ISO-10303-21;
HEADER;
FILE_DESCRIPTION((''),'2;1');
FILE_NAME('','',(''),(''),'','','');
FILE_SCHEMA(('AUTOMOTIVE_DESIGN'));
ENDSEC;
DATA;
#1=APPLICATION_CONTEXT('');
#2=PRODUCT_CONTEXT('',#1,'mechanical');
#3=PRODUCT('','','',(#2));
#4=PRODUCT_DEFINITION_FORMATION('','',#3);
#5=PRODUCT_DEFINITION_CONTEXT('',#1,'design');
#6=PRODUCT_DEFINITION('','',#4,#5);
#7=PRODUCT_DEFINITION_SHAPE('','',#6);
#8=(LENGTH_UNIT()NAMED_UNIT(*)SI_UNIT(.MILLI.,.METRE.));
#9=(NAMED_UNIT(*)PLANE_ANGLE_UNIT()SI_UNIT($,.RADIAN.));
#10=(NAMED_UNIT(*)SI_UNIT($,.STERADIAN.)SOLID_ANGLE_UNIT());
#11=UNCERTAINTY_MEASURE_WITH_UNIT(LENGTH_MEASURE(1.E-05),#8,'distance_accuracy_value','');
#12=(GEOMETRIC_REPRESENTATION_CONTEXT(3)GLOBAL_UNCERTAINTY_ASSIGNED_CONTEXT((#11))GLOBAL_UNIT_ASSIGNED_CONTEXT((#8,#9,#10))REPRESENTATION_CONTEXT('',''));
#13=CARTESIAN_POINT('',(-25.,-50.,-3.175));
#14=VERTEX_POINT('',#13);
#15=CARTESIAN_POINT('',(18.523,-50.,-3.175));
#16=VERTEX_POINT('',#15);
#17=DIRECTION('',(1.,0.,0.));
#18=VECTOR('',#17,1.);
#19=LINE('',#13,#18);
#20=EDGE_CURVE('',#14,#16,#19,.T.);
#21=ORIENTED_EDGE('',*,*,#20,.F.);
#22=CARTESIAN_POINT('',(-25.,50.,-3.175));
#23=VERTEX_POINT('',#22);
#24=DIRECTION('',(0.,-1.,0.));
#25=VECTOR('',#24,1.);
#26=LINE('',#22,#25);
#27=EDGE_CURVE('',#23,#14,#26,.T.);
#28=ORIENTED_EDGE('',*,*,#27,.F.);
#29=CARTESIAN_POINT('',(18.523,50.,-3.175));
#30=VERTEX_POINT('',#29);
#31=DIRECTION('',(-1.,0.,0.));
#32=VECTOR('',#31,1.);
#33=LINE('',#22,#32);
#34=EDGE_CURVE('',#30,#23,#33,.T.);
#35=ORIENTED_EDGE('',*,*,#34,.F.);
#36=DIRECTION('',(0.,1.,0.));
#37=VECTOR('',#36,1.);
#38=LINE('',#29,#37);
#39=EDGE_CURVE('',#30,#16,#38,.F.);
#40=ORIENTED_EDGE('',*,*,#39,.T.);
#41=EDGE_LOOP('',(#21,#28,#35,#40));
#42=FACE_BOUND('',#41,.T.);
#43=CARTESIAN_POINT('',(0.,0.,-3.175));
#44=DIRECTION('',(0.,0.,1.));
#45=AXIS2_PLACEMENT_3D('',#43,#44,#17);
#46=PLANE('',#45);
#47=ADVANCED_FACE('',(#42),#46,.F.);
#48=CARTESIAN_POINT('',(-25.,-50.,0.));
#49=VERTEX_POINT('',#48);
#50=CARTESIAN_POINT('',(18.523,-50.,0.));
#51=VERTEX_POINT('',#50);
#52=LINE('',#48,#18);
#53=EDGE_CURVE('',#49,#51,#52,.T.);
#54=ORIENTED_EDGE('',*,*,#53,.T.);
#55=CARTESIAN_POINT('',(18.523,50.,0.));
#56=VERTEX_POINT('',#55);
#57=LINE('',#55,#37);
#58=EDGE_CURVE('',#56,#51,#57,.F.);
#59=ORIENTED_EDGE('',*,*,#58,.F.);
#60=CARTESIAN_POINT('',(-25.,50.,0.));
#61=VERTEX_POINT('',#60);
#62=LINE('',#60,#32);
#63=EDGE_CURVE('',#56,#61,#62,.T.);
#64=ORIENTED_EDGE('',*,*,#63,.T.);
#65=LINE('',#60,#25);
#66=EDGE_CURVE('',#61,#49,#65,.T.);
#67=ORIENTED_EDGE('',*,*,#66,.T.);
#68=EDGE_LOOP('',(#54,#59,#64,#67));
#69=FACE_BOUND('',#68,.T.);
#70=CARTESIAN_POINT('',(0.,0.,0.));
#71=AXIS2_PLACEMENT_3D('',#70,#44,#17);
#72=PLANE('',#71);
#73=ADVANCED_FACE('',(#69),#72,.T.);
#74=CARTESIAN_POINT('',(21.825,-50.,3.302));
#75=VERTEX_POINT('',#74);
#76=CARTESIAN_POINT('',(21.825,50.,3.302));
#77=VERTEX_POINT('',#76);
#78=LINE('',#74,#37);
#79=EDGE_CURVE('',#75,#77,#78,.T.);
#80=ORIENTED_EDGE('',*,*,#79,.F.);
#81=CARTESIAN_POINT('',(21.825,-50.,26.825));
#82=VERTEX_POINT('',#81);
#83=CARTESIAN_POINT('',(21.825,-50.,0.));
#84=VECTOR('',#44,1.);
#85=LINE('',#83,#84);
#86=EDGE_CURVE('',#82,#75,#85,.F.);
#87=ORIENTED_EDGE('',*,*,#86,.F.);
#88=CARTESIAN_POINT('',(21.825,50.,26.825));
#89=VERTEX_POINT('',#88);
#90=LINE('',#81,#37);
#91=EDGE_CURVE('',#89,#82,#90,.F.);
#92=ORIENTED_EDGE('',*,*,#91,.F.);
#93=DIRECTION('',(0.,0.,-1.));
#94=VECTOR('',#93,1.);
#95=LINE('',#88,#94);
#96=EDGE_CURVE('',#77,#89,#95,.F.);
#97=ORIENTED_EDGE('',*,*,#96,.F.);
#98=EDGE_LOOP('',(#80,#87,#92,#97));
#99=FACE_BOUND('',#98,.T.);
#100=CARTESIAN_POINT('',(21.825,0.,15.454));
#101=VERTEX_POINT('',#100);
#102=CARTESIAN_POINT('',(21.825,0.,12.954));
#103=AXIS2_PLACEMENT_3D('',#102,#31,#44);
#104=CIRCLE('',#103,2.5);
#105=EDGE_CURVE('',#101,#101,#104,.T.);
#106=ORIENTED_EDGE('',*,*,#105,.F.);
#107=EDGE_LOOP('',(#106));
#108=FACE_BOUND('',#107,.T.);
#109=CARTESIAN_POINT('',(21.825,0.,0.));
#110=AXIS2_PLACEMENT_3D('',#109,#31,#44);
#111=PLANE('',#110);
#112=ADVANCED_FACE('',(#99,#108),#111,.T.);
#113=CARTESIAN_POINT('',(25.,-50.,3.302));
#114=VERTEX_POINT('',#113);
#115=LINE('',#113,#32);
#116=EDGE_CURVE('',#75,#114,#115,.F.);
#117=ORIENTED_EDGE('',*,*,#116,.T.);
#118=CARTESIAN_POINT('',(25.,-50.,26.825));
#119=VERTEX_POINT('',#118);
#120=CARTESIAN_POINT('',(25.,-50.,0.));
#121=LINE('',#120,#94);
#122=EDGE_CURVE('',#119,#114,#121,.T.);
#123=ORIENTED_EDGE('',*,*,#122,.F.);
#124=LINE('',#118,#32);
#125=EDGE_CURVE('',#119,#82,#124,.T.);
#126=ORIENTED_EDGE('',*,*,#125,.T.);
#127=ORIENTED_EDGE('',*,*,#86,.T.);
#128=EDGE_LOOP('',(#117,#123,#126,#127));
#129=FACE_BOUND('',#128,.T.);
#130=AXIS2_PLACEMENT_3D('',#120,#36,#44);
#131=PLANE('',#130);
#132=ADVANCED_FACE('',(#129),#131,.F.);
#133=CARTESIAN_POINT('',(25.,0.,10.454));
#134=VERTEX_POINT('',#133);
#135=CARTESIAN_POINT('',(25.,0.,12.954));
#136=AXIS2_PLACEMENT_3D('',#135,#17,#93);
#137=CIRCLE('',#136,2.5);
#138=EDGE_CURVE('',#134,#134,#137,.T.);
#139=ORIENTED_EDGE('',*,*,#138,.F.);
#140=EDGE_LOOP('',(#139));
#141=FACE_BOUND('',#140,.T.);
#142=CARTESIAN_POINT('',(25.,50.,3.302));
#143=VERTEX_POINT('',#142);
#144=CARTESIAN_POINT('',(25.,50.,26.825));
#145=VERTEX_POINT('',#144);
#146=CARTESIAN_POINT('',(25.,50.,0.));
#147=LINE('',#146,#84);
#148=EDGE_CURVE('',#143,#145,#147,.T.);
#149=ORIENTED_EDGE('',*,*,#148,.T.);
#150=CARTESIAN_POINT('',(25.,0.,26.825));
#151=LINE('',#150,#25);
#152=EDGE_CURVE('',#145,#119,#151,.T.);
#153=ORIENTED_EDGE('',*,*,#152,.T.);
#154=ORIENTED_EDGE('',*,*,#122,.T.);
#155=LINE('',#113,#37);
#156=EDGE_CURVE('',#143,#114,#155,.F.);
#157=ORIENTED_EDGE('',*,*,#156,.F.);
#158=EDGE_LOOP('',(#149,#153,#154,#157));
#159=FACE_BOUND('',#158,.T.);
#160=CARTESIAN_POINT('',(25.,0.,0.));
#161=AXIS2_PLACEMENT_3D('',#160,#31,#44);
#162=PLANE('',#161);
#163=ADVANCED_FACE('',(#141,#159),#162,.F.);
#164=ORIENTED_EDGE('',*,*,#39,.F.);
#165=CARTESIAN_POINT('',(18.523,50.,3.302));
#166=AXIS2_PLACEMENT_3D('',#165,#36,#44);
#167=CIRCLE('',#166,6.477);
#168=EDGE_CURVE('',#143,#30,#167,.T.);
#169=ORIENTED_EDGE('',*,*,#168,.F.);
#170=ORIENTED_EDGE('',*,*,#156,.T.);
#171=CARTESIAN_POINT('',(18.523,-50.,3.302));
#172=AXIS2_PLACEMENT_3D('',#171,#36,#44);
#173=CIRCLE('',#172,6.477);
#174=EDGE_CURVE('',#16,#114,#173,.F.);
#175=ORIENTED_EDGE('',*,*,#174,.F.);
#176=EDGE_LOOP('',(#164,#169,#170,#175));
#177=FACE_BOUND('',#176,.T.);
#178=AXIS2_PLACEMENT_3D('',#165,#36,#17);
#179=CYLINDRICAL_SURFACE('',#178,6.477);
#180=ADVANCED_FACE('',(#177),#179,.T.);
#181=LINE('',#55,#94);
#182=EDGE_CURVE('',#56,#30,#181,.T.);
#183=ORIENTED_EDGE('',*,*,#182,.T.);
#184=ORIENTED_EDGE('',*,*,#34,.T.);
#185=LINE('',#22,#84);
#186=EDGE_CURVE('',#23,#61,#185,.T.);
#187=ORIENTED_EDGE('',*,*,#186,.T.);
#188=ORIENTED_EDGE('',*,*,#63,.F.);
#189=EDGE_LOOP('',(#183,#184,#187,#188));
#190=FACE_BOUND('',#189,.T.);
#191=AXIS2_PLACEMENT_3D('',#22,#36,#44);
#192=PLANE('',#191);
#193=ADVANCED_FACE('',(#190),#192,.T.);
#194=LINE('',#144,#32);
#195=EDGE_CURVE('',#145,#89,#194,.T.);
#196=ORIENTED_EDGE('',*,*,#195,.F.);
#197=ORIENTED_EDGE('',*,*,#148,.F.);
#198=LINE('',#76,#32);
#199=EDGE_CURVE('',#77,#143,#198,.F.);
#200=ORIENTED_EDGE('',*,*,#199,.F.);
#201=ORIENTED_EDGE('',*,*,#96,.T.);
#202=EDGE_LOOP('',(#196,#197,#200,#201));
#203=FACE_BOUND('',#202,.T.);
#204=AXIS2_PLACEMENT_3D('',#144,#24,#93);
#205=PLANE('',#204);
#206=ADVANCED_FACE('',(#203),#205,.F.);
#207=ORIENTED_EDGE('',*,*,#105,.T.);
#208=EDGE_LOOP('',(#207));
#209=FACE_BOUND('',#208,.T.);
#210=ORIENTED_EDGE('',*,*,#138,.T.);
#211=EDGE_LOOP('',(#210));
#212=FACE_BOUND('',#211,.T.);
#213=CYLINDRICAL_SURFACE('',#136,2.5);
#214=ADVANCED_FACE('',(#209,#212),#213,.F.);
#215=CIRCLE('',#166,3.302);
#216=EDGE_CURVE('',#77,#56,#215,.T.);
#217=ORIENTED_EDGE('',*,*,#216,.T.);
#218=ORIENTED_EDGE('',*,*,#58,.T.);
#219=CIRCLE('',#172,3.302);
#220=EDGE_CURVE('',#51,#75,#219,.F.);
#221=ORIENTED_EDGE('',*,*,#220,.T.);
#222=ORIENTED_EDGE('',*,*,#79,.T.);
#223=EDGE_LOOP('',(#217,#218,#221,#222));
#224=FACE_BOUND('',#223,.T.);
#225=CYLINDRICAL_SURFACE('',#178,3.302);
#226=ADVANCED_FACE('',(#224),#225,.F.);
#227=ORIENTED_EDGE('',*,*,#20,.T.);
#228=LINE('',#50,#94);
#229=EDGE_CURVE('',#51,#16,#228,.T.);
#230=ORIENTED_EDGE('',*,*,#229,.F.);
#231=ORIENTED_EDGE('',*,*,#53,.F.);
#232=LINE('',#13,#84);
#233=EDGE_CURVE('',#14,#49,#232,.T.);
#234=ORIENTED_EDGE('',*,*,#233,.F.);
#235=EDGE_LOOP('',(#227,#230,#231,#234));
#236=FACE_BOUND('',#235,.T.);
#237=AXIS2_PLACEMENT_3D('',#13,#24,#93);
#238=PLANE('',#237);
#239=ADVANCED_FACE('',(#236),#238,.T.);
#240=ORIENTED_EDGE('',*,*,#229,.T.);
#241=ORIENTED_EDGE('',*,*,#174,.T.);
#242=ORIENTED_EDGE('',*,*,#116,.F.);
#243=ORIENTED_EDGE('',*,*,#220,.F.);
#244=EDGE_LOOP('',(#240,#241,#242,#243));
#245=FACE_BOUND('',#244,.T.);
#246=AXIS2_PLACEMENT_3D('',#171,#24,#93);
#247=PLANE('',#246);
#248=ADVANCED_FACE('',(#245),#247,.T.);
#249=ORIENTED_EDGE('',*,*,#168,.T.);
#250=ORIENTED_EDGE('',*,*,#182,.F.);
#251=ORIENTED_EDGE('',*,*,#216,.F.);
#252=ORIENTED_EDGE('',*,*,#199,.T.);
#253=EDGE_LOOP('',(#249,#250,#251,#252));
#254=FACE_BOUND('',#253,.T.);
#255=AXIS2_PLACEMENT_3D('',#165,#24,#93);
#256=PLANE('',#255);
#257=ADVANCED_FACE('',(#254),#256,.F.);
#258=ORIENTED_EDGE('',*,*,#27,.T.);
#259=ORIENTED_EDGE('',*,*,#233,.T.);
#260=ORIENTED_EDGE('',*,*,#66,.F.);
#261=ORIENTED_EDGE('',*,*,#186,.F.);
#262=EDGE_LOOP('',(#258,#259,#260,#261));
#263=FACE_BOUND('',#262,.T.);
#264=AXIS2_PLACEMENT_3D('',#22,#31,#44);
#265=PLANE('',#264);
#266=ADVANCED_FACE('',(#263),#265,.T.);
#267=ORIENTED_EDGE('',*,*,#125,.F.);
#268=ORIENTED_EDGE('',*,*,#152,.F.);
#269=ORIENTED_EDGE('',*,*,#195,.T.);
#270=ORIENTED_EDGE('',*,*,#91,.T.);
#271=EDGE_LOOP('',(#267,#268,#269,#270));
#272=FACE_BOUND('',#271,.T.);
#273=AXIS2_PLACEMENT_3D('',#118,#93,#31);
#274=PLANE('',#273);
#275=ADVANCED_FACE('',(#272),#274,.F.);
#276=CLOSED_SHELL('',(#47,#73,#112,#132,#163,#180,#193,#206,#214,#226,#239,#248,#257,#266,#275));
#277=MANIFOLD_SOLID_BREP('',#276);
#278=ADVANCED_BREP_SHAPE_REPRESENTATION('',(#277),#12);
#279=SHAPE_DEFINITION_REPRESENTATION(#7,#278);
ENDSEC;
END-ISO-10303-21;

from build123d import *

# Parameters (mm, degrees)
SKETCH1_W                    = 50
SKETCH1_H                    = 100
BASE_FLANGE2_DEPTH           = 3.175
EDGE_FLANGE1_STRIP_W         = 19.304
EDGE_FLANGE1_STRIP_H         = 3.175
EDGE_FLANGE1_STRIP_CUT_DEPTH = 100
EDGE_FLANGE1_DEPTH           = 100
F_5_0MM_DOWEL_HOLE1_D        = 5


# Sheet-metal steps are written as plain solids
with BuildPart() as part:
    # Sketch1 → Base-Flange2 (new body)
    with BuildSketch(Plane.XY):
        Rectangle(SKETCH1_W, SKETCH1_H)
    extrude(amount=-BASE_FLANGE2_DEPTH)

    # Edge-Flange1 strip (across the edge) → Edge-Flange1 strip cut (cut)
    with BuildSketch(Plane(origin=(25, -50, 0), x_dir=(-1, 0, 0), z_dir=(0, 1, 0))):
        with Locations((-3.175, -1.5875)):
            Rectangle(EDGE_FLANGE1_STRIP_W, EDGE_FLANGE1_STRIP_H)
    extrude(amount=EDGE_FLANGE1_STRIP_CUT_DEPTH, mode=Mode.SUBTRACT)

    # Edge-Flange1 section (across the edge) → Edge-Flange1 (add)
    with BuildSketch(Plane(origin=(25, -50, 0), x_dir=(-1, 0, 0), z_dir=(0, 1, 0))):
        with BuildLine():
            Line((0, 3.302), (0, 26.825))
            Line((0, 26.825), (3.175, 26.825))
            Line((3.175, 26.825), (3.175, 3.302))
            ThreePointArc((3.175, 3.302), (4.142133409, 0.967133409), (6.477, 0))
            Line((6.477, 0), (6.477, -3.175))
            ThreePointArc((6.477, -3.175), (1.897069378, -1.277930622), (0, 3.302))
        make_face()
    extrude(amount=EDGE_FLANGE1_DEPTH)

    # Ø5.0mm Dowel Hole1 (through all)
    with Locations(Plane(origin=(25, 0, 0), x_dir=(0, 0, -1), z_dir=(1, 0, 0))):
        with Locations((-12.954, 0)):
            Hole(F_5_0MM_DOWEL_HOLE1_D / 2)


solid = part.part
